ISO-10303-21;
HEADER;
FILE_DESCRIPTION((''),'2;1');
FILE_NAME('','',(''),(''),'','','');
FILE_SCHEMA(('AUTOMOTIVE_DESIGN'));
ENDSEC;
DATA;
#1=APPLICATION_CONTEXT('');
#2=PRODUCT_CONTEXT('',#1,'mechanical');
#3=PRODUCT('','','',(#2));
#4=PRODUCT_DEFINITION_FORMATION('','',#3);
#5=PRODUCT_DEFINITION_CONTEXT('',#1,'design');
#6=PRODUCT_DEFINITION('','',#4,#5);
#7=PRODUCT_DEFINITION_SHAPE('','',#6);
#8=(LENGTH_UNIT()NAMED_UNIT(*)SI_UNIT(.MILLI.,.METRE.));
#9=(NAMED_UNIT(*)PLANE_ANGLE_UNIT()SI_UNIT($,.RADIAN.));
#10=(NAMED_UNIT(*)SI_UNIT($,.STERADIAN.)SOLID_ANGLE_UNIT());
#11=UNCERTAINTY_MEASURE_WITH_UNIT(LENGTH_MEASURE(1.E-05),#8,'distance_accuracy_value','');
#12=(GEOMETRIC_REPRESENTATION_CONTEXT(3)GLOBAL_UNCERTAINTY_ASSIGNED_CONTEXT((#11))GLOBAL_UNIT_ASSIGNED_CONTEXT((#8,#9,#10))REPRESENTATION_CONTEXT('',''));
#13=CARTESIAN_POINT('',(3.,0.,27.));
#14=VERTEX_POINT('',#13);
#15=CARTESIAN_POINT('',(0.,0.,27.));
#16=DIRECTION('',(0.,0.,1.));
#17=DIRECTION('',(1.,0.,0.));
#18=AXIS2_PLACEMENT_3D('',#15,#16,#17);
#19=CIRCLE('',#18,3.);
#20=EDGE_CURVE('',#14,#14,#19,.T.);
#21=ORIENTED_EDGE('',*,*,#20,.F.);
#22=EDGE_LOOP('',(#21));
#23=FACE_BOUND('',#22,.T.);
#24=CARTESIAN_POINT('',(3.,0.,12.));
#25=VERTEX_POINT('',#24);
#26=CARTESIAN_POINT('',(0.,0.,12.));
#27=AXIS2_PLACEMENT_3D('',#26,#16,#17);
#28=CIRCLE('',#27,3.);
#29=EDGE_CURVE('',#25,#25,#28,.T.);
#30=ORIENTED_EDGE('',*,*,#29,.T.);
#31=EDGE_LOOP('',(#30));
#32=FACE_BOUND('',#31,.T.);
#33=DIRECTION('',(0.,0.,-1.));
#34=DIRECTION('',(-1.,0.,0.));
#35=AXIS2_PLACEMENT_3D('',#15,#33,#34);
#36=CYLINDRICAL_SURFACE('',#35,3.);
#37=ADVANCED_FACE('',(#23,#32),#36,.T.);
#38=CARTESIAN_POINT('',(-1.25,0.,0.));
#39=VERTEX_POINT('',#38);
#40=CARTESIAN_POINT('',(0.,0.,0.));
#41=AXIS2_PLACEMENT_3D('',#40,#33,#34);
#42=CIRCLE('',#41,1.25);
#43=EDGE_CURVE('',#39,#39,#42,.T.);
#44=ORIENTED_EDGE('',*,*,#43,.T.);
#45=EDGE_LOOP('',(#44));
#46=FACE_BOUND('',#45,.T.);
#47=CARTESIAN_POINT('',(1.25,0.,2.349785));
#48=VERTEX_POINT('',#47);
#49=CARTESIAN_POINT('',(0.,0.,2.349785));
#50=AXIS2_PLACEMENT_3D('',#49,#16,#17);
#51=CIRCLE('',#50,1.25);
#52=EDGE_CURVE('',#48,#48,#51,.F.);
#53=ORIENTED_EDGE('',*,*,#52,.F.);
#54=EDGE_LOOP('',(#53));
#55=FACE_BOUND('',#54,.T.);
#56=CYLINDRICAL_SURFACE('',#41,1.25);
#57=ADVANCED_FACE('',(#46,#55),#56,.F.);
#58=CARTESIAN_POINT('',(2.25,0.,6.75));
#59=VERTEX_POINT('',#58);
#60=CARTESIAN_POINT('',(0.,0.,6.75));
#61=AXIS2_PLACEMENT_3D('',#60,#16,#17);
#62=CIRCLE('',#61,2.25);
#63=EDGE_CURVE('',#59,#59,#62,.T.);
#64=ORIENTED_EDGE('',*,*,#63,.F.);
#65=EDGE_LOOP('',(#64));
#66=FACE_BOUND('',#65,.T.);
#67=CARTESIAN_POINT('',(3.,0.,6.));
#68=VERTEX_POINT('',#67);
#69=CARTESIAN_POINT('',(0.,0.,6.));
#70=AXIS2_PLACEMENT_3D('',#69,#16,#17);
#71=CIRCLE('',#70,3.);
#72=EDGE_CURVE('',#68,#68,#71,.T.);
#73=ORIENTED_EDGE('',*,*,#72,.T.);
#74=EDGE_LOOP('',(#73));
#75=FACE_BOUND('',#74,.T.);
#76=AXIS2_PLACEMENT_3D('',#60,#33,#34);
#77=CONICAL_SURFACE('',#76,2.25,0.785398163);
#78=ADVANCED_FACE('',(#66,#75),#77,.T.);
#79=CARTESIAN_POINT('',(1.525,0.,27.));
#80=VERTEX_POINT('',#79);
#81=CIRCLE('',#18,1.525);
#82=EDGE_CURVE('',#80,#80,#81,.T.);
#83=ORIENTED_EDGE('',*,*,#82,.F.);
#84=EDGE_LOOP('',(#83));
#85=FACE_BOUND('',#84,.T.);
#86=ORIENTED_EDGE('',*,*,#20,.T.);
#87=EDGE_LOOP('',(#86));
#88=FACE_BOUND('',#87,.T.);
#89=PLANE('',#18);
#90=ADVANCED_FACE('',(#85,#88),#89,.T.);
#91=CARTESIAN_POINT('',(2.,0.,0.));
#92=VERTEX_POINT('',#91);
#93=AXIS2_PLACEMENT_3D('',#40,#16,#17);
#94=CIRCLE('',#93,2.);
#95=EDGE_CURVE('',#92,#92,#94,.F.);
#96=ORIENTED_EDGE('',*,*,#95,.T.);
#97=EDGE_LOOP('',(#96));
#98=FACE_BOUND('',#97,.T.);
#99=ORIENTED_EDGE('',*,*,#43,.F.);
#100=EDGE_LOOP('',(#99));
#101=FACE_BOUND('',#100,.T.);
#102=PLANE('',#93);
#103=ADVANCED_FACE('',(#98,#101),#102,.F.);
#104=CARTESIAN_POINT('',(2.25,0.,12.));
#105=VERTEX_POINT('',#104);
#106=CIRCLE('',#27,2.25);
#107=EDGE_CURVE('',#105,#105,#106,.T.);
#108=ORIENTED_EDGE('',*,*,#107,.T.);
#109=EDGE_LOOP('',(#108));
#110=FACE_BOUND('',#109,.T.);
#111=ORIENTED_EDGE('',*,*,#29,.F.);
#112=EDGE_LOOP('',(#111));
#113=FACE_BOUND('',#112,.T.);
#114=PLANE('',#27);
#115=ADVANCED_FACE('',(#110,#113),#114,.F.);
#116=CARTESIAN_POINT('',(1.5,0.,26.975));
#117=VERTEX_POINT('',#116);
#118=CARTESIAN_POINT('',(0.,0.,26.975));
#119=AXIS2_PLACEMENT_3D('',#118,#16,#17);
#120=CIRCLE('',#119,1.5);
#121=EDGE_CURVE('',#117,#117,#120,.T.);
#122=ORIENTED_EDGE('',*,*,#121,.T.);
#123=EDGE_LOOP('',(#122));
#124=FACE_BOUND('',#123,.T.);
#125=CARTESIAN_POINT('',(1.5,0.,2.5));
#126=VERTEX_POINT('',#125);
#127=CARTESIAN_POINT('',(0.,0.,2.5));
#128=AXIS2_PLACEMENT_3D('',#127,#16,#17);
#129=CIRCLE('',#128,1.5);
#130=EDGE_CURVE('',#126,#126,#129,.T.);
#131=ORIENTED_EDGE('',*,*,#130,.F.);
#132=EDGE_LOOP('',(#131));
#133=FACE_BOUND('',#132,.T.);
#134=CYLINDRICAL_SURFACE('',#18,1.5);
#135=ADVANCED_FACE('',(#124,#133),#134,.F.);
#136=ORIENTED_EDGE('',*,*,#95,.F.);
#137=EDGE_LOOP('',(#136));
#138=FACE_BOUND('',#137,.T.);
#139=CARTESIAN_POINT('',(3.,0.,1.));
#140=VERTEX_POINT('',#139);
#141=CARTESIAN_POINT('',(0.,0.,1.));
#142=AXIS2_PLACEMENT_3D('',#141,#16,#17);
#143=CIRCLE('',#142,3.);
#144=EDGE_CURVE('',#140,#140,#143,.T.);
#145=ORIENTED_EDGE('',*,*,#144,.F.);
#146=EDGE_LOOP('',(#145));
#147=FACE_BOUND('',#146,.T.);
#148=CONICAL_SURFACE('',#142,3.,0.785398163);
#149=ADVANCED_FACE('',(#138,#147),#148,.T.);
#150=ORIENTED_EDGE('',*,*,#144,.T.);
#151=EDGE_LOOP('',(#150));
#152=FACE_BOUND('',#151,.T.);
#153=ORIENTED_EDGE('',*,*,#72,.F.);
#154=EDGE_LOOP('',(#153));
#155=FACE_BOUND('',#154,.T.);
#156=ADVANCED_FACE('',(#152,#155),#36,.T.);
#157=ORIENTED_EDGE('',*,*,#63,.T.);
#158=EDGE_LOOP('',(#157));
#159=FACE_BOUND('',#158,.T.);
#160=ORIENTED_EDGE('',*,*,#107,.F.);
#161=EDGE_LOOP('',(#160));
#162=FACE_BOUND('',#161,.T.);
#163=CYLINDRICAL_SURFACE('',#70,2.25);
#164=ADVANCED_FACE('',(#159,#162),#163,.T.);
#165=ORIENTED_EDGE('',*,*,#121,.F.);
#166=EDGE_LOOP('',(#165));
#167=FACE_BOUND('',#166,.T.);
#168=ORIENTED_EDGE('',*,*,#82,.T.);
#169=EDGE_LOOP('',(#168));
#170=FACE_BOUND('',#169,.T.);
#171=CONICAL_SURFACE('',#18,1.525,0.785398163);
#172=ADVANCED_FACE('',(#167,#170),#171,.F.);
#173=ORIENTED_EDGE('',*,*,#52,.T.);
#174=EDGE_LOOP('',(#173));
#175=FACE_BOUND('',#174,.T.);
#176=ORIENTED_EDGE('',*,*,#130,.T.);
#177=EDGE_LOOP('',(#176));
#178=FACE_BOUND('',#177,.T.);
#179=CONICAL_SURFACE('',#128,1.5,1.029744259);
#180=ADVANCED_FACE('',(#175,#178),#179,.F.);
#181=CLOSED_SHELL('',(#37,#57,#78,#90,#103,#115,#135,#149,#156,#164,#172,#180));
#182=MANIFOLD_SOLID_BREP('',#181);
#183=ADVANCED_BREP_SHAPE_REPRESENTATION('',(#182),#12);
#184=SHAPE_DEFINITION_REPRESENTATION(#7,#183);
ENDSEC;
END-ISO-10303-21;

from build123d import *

# Parameters (mm, degrees)
ESQUISSE1_R                             = 3
BOSS_EXTRU_1_DEPTH                      = 27
DIAM_TRE_DU_PER_AGE_3_0_3_1_D           = 3
DIAM_TRE_DU_PER_AGE_3_0_3_1_DEPTH       = 24.5
DIAM_TRE_DU_PER_AGE_3_0_3_1_CSINK_D     = 3.05
DIAM_TRE_DU_PER_AGE_3_0_3_1_CSINK_ANGLE = 90
DIAM_TRE_DU_PER_AGE_3_0_3_1_TIP         = 0.901290929
DIAM_TRE_DU_PER_AGE_2_5_2_5_1_D         = 2.5
DIAM_TRE_DU_PER_AGE_2_5_2_5_1_DEPTH     = 2.5
DIAM_TRE_DU_PER_AGE_2_5_2_5_1_TIP       = 0.751075774
ENL_V_START                             = -15
ESQUISSE8_W                             = 10.37088702
ESQUISSE8_H                             = 7.120487756
ESQUISSE8_R                             = 2.25
ENL_V_MAT_EXTRU_1_DEPTH                 = 6
CHANFREIN1_SIZE                         = 1
CHANFREIN2_SIZE                         = 0.75


with BuildPart() as part:
    # Esquisse1 → Boss.-Extru.1 (new body)
    with BuildSketch(Plane.XY):
        Circle(ESQUISSE1_R)
    extrude(amount=BOSS_EXTRU_1_DEPTH)

    # Diamètre du perçage Ø3.0 (3)1
    with Locations(Plane.XY.offset(27)):
        with Locations((0, 0)):
            CounterSinkHole(DIAM_TRE_DU_PER_AGE_3_0_3_1_D / 2, DIAM_TRE_DU_PER_AGE_3_0_3_1_CSINK_D / 2, depth=DIAM_TRE_DU_PER_AGE_3_0_3_1_DEPTH, counter_sink_angle=DIAM_TRE_DU_PER_AGE_3_0_3_1_CSINK_ANGLE)
            with Locations((0, 0, -(DIAM_TRE_DU_PER_AGE_3_0_3_1_DEPTH + DIAM_TRE_DU_PER_AGE_3_0_3_1_TIP / 2))):  # 118° drill point
                Cone(0, DIAM_TRE_DU_PER_AGE_3_0_3_1_D / 2, DIAM_TRE_DU_PER_AGE_3_0_3_1_TIP, mode=Mode.SUBTRACT)

    # Diamètre du perçage Ø2.5 (2.5)1
    with Locations(Plane(origin=(0, 0, 0), x_dir=(-1, 0, 0), z_dir=(0, 0, -1))):
        with Locations((0, 0)):
            Hole(DIAM_TRE_DU_PER_AGE_2_5_2_5_1_D / 2, depth=DIAM_TRE_DU_PER_AGE_2_5_2_5_1_DEPTH)
            with Locations((0, 0, -(DIAM_TRE_DU_PER_AGE_2_5_2_5_1_DEPTH + DIAM_TRE_DU_PER_AGE_2_5_2_5_1_TIP / 2))):  # 118° drill point
                Cone(0, DIAM_TRE_DU_PER_AGE_2_5_2_5_1_D / 2, DIAM_TRE_DU_PER_AGE_2_5_2_5_1_TIP, mode=Mode.SUBTRACT)

    # Esquisse8 → Enlèv. mat.-Extru.1 (cut)
    with BuildSketch(Plane.XY.offset(27).offset(ENL_V_START)):
        with Locations((-0.50743182, -0.050962128)):
            Rectangle(ESQUISSE8_W, ESQUISSE8_H)
        Circle(ESQUISSE8_R, mode=Mode.SUBTRACT)
    extrude(amount=-ENL_V_MAT_EXTRU_1_DEPTH, mode=Mode.SUBTRACT)

    # Chanfrein1
    chanfrein1_edges = [part.edges().sort_by_distance(p)[0] for p in [
        (-3, 0, 0),
    ]]
    chamfer(chanfrein1_edges, length=CHANFREIN1_SIZE)

    # Chanfrein2
    chanfrein2_edges = [part.edges().sort_by_distance(p)[0] for p in [
        (-2.25, 0, 6),
    ]]
    chamfer(chanfrein2_edges, length=CHANFREIN2_SIZE - 0.0001)  # a hair under: the kernel refuses the full size


solid = part.part
